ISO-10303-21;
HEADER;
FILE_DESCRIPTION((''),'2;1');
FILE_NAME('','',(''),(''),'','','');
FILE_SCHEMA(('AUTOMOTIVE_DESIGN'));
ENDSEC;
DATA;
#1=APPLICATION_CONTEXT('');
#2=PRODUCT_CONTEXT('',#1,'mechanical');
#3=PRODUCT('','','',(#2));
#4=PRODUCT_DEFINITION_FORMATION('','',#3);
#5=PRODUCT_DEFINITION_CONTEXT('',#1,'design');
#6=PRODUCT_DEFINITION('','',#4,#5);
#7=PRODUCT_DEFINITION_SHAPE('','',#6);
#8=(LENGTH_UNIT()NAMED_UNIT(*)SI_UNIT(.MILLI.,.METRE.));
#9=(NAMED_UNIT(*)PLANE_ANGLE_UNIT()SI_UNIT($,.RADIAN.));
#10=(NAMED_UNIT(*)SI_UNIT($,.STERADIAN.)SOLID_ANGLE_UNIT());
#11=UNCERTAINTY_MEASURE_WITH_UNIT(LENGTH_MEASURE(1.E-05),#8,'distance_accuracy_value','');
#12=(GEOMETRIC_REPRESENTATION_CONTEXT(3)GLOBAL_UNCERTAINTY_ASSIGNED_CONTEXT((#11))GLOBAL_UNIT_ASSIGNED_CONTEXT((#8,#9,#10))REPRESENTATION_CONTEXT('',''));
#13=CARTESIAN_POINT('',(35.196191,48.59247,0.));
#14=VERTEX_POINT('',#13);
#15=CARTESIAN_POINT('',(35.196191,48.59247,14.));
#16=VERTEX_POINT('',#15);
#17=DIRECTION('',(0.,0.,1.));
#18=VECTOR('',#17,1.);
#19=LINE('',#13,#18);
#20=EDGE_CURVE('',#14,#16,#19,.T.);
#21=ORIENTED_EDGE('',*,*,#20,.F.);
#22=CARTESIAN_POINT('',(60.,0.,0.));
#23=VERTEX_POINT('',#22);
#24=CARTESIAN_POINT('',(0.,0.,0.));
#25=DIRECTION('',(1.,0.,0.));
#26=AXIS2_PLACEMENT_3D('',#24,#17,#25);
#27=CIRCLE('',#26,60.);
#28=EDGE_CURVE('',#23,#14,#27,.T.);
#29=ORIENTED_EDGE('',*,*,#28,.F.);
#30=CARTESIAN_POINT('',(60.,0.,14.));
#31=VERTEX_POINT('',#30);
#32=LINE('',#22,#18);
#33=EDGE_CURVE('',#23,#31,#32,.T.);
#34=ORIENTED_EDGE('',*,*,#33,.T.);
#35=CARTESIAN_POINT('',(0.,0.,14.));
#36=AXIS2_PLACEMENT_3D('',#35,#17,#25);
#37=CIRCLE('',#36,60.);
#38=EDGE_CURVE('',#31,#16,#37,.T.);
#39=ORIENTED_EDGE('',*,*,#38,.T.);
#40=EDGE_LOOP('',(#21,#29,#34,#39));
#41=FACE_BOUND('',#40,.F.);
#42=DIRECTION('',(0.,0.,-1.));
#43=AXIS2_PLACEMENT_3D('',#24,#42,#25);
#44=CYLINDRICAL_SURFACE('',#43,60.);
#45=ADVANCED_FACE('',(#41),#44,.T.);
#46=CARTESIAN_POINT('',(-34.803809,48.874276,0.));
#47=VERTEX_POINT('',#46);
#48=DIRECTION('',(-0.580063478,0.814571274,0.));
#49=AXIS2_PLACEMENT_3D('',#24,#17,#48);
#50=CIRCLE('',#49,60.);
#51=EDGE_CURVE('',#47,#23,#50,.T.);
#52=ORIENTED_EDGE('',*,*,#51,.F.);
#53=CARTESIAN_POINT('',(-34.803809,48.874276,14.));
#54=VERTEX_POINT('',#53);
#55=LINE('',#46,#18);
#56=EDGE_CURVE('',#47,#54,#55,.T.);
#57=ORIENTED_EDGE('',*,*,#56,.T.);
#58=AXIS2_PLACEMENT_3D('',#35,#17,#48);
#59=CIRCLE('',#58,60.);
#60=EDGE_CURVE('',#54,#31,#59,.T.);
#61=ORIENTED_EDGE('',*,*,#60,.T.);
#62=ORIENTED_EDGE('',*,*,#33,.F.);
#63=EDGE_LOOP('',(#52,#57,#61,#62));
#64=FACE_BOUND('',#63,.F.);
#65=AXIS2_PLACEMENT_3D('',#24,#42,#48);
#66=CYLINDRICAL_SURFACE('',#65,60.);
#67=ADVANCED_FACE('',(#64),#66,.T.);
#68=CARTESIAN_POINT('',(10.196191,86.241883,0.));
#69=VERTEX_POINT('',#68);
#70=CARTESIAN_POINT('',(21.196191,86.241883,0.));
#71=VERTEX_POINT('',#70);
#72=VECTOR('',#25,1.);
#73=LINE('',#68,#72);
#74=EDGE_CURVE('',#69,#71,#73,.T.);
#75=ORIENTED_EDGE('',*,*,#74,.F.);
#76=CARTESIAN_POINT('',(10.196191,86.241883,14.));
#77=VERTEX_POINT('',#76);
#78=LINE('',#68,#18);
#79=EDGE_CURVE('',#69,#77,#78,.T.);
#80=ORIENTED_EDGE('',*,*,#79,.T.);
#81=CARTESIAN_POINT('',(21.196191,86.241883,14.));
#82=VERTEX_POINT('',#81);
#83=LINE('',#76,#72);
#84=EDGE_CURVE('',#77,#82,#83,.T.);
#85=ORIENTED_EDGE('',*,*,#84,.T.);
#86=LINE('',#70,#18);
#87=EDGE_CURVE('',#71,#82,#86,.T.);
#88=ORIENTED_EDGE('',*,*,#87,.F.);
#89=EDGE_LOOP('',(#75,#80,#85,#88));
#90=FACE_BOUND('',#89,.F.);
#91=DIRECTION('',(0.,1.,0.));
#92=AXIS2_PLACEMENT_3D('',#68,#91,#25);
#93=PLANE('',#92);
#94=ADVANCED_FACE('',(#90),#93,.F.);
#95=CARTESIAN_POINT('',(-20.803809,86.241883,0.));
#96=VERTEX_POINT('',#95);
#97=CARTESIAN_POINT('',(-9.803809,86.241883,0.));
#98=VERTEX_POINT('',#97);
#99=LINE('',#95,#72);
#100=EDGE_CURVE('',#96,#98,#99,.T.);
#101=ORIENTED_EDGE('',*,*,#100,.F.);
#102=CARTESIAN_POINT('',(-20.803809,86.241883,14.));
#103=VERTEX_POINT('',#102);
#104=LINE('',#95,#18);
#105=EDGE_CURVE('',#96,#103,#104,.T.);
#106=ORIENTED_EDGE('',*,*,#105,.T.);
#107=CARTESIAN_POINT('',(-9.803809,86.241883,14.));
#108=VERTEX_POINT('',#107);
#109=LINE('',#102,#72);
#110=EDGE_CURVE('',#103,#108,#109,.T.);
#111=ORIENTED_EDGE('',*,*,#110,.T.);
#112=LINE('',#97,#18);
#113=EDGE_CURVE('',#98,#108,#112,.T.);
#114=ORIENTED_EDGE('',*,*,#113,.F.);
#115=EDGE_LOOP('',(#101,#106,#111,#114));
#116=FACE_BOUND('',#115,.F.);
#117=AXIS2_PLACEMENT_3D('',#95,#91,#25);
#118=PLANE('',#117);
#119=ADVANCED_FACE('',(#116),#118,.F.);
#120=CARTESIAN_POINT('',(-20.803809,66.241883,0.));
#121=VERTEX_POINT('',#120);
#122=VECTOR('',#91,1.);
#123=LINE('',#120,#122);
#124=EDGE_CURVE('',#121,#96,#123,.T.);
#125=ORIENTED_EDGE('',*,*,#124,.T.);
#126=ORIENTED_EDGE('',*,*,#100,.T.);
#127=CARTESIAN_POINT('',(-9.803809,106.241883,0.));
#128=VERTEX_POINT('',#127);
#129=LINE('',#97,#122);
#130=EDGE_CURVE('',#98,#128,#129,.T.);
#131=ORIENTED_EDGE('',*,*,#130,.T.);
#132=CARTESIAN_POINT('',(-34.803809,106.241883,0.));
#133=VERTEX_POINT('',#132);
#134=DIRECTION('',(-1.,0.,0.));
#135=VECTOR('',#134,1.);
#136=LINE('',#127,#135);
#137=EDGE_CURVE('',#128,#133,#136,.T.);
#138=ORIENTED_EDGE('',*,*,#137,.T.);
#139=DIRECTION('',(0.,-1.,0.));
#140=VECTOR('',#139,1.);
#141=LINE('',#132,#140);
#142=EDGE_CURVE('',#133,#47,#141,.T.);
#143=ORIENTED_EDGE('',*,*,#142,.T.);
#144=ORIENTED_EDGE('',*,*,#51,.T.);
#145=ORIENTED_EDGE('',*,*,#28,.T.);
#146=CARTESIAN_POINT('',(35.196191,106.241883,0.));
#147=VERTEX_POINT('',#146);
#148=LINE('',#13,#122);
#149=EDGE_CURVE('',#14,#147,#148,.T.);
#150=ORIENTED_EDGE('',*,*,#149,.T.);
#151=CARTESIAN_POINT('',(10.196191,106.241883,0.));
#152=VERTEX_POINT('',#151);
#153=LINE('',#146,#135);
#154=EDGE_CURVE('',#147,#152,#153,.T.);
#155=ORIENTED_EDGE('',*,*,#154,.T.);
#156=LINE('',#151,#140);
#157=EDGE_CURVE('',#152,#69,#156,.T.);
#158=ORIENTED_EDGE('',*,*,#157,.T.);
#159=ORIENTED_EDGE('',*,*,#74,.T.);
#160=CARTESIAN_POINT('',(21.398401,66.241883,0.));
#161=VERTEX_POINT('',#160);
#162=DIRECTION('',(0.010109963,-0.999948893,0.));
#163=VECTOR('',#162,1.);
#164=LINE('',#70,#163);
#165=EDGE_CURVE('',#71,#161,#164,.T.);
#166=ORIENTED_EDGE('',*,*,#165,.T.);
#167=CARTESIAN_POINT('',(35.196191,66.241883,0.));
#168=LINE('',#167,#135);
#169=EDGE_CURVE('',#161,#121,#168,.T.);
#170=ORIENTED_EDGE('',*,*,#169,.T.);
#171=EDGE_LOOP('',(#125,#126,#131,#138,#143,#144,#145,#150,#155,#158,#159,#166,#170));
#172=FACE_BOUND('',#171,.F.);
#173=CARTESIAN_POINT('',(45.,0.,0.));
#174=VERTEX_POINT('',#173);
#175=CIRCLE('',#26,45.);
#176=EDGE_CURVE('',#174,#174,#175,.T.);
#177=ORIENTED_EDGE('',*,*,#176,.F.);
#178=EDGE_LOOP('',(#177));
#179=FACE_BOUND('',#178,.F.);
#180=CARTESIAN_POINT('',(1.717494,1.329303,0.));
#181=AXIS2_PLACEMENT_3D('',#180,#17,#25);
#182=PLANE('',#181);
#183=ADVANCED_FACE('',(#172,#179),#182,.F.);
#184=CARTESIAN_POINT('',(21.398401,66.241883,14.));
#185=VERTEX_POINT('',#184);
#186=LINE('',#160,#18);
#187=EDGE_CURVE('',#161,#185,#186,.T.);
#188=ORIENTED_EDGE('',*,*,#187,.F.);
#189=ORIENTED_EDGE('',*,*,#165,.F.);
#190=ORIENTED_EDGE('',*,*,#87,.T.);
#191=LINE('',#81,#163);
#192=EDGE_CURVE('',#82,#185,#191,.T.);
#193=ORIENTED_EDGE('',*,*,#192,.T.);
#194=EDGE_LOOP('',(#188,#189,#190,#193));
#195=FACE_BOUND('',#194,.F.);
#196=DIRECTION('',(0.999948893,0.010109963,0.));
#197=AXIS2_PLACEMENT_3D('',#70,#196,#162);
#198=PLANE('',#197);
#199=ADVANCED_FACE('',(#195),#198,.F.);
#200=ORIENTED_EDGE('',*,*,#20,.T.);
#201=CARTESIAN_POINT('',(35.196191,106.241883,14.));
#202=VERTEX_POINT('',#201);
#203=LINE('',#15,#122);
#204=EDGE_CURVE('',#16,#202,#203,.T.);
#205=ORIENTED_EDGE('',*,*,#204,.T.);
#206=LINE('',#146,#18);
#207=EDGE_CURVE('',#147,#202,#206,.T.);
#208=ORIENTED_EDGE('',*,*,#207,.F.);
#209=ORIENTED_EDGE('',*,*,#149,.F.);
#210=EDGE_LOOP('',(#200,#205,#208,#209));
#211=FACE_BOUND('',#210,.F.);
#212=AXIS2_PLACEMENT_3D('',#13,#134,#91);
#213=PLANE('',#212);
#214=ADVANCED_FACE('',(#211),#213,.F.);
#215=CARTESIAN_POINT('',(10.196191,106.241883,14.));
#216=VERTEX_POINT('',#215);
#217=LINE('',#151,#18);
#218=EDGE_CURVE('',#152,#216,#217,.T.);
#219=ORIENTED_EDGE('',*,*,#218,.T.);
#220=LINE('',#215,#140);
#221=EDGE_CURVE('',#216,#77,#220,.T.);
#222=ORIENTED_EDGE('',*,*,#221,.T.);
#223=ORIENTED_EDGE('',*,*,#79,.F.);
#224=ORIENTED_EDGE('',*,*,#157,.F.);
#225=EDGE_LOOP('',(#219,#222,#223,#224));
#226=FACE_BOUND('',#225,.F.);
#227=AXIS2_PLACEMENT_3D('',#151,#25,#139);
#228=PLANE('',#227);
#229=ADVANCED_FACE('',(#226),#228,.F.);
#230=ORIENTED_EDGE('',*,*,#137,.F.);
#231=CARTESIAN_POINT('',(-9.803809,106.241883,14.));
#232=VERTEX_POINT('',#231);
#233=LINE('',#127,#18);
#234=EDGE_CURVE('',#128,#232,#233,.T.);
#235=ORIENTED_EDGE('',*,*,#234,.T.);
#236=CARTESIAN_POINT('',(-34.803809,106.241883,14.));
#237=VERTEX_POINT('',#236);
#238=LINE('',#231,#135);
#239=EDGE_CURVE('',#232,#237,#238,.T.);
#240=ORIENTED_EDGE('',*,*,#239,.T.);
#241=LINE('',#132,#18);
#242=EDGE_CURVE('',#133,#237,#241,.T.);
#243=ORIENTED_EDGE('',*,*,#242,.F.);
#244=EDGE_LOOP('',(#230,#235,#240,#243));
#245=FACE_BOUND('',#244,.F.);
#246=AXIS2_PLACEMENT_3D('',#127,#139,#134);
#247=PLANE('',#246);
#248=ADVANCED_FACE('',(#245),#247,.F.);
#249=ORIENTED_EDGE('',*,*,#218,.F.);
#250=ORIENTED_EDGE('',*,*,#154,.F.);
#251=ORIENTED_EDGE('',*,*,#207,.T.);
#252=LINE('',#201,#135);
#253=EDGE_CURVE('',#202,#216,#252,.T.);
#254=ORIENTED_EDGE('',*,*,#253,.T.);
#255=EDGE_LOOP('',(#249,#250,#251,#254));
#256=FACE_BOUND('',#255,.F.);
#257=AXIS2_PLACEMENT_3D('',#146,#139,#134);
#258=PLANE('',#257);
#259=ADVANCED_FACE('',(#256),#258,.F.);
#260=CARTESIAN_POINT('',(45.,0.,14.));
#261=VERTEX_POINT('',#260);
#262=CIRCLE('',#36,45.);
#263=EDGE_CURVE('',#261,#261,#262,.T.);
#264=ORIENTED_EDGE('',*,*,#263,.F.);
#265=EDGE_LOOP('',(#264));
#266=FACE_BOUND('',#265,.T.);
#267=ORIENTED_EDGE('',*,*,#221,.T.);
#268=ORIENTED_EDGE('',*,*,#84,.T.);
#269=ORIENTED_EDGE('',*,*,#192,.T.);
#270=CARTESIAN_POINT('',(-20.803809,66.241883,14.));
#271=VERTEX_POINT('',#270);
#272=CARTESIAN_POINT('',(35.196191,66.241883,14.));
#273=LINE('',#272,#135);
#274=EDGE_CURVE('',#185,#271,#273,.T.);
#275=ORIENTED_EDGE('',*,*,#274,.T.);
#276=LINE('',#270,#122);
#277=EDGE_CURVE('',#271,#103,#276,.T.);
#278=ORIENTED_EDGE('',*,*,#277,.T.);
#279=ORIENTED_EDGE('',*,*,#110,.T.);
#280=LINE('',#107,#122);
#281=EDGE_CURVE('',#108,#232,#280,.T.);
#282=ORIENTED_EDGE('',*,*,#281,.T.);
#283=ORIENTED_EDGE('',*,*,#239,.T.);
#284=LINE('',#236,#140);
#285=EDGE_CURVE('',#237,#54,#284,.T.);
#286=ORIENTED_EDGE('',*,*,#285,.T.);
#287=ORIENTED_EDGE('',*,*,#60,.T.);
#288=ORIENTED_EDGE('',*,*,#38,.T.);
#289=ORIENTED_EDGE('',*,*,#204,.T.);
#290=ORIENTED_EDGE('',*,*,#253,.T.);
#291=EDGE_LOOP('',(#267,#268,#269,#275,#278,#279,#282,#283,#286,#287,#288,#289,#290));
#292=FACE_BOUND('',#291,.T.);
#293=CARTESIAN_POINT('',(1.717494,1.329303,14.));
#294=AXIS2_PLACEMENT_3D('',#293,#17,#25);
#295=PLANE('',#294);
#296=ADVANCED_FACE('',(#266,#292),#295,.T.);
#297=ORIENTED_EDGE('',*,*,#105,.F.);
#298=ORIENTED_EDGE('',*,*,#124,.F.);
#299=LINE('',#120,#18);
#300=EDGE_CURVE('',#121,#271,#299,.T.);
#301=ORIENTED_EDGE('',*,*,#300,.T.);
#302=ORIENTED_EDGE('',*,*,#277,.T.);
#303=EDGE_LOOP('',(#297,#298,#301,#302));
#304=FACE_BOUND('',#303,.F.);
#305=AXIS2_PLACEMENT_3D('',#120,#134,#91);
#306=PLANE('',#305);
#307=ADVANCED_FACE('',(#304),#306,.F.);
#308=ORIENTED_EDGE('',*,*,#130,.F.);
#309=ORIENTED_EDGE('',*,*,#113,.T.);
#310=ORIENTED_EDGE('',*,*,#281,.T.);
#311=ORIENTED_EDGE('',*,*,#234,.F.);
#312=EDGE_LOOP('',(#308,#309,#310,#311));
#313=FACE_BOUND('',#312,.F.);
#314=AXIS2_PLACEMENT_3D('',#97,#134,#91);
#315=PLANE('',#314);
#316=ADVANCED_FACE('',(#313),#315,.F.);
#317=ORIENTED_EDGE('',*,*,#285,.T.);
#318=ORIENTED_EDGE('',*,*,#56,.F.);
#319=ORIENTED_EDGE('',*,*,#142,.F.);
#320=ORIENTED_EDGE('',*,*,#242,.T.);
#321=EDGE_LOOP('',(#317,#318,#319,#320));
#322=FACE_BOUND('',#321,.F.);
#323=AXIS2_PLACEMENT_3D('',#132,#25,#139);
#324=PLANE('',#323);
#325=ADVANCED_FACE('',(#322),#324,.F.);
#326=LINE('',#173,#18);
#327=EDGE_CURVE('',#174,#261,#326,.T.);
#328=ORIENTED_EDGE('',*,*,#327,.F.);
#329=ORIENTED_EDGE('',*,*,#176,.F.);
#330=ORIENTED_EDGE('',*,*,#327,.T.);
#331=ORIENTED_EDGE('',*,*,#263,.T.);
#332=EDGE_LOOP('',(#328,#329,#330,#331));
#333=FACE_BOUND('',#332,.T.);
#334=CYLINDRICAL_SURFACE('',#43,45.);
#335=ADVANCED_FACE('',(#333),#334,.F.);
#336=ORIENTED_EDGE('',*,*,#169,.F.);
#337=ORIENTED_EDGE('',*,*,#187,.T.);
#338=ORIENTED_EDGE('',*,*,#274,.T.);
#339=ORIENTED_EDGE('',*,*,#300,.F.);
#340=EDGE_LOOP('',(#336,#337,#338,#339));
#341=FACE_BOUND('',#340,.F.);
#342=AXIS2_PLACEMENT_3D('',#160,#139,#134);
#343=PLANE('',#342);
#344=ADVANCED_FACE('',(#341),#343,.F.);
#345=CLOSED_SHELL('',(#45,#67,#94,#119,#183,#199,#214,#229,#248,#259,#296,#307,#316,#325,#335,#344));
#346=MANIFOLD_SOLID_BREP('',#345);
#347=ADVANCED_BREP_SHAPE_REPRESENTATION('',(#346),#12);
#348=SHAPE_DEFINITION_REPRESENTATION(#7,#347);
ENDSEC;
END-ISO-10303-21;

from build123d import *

# Parameters (mm, degrees)
F0_R     = 45
F1_DEPTH = 14


with BuildPart() as f1:
    # F0 (on Top) → F1 (new body)
    with BuildSketch(Plane.XY):
        with BuildLine():
            ThreePointArc((-34.8038087036, 48.8742764624), (-27.493376273, -53.3302377747), (60, 0))
            ThreePointArc((60, 0), (53.4404878242, 27.2784578213), (35.1961912964, 48.5924697688))
            Line((35.1961912964, 48.5924697688), (-34.8038087036, 48.5924697688))
            Line((-34.8038087036, 48.5924697688), (-34.8038087036, 48.8742764624))
        make_face()
        Circle(F0_R, mode=Mode.SUBTRACT)
        with BuildLine():
            Line((-34.8038087036, 48.5924697688), (35.1961912964, 48.5924697688))
            ThreePointArc((35.1961912964, 48.5924697688), (0.2415466371, 59.9995137915), (-34.8038087036, 48.8742764624))
            Line((-34.8038087036, 48.8742764624), (-34.8038087036, 48.5924697688))
        make_face()
        with BuildLine():
            ThreePointArc((-34.8038087036, 48.8742764624), (0.2415466371, 59.9995137915), (35.1961912964, 48.5924697688))
            Line((35.1961912964, 48.5924697688), (35.1961912964, 66.2418827415))
            Line((35.1961912964, 66.2418827415), (21.3984008878, 66.2418827415))
            Line((21.3984008878, 66.2418827415), (-20.8038087036, 66.2418827415))
            Line((-20.8038087036, 66.2418827415), (-34.8038087036, 66.2418827415))
            Line((-34.8038087036, 66.2418827415), (-34.8038087036, 48.8742764624))
        make_face()
        Polygon((21.3984008878, 66.2418827415), (35.1961912964, 66.2418827415), (35.1961912964, 106.2418827415), (10.1961912964, 106.2418827415), (10.1961912964, 86.2418827415), (21.1961912964, 86.2418827415), align=None)
        Polygon((-34.8038087036, 106.2418827415), (-34.8038087036, 66.2418827415), (-20.8038087036, 66.2418827415), (-20.8038087036, 86.2418827415), (-9.8038087036, 86.2418827415), (-9.8038087036, 106.2418827415), align=None)
    extrude(amount=F1_DEPTH)


solid = f1.part
